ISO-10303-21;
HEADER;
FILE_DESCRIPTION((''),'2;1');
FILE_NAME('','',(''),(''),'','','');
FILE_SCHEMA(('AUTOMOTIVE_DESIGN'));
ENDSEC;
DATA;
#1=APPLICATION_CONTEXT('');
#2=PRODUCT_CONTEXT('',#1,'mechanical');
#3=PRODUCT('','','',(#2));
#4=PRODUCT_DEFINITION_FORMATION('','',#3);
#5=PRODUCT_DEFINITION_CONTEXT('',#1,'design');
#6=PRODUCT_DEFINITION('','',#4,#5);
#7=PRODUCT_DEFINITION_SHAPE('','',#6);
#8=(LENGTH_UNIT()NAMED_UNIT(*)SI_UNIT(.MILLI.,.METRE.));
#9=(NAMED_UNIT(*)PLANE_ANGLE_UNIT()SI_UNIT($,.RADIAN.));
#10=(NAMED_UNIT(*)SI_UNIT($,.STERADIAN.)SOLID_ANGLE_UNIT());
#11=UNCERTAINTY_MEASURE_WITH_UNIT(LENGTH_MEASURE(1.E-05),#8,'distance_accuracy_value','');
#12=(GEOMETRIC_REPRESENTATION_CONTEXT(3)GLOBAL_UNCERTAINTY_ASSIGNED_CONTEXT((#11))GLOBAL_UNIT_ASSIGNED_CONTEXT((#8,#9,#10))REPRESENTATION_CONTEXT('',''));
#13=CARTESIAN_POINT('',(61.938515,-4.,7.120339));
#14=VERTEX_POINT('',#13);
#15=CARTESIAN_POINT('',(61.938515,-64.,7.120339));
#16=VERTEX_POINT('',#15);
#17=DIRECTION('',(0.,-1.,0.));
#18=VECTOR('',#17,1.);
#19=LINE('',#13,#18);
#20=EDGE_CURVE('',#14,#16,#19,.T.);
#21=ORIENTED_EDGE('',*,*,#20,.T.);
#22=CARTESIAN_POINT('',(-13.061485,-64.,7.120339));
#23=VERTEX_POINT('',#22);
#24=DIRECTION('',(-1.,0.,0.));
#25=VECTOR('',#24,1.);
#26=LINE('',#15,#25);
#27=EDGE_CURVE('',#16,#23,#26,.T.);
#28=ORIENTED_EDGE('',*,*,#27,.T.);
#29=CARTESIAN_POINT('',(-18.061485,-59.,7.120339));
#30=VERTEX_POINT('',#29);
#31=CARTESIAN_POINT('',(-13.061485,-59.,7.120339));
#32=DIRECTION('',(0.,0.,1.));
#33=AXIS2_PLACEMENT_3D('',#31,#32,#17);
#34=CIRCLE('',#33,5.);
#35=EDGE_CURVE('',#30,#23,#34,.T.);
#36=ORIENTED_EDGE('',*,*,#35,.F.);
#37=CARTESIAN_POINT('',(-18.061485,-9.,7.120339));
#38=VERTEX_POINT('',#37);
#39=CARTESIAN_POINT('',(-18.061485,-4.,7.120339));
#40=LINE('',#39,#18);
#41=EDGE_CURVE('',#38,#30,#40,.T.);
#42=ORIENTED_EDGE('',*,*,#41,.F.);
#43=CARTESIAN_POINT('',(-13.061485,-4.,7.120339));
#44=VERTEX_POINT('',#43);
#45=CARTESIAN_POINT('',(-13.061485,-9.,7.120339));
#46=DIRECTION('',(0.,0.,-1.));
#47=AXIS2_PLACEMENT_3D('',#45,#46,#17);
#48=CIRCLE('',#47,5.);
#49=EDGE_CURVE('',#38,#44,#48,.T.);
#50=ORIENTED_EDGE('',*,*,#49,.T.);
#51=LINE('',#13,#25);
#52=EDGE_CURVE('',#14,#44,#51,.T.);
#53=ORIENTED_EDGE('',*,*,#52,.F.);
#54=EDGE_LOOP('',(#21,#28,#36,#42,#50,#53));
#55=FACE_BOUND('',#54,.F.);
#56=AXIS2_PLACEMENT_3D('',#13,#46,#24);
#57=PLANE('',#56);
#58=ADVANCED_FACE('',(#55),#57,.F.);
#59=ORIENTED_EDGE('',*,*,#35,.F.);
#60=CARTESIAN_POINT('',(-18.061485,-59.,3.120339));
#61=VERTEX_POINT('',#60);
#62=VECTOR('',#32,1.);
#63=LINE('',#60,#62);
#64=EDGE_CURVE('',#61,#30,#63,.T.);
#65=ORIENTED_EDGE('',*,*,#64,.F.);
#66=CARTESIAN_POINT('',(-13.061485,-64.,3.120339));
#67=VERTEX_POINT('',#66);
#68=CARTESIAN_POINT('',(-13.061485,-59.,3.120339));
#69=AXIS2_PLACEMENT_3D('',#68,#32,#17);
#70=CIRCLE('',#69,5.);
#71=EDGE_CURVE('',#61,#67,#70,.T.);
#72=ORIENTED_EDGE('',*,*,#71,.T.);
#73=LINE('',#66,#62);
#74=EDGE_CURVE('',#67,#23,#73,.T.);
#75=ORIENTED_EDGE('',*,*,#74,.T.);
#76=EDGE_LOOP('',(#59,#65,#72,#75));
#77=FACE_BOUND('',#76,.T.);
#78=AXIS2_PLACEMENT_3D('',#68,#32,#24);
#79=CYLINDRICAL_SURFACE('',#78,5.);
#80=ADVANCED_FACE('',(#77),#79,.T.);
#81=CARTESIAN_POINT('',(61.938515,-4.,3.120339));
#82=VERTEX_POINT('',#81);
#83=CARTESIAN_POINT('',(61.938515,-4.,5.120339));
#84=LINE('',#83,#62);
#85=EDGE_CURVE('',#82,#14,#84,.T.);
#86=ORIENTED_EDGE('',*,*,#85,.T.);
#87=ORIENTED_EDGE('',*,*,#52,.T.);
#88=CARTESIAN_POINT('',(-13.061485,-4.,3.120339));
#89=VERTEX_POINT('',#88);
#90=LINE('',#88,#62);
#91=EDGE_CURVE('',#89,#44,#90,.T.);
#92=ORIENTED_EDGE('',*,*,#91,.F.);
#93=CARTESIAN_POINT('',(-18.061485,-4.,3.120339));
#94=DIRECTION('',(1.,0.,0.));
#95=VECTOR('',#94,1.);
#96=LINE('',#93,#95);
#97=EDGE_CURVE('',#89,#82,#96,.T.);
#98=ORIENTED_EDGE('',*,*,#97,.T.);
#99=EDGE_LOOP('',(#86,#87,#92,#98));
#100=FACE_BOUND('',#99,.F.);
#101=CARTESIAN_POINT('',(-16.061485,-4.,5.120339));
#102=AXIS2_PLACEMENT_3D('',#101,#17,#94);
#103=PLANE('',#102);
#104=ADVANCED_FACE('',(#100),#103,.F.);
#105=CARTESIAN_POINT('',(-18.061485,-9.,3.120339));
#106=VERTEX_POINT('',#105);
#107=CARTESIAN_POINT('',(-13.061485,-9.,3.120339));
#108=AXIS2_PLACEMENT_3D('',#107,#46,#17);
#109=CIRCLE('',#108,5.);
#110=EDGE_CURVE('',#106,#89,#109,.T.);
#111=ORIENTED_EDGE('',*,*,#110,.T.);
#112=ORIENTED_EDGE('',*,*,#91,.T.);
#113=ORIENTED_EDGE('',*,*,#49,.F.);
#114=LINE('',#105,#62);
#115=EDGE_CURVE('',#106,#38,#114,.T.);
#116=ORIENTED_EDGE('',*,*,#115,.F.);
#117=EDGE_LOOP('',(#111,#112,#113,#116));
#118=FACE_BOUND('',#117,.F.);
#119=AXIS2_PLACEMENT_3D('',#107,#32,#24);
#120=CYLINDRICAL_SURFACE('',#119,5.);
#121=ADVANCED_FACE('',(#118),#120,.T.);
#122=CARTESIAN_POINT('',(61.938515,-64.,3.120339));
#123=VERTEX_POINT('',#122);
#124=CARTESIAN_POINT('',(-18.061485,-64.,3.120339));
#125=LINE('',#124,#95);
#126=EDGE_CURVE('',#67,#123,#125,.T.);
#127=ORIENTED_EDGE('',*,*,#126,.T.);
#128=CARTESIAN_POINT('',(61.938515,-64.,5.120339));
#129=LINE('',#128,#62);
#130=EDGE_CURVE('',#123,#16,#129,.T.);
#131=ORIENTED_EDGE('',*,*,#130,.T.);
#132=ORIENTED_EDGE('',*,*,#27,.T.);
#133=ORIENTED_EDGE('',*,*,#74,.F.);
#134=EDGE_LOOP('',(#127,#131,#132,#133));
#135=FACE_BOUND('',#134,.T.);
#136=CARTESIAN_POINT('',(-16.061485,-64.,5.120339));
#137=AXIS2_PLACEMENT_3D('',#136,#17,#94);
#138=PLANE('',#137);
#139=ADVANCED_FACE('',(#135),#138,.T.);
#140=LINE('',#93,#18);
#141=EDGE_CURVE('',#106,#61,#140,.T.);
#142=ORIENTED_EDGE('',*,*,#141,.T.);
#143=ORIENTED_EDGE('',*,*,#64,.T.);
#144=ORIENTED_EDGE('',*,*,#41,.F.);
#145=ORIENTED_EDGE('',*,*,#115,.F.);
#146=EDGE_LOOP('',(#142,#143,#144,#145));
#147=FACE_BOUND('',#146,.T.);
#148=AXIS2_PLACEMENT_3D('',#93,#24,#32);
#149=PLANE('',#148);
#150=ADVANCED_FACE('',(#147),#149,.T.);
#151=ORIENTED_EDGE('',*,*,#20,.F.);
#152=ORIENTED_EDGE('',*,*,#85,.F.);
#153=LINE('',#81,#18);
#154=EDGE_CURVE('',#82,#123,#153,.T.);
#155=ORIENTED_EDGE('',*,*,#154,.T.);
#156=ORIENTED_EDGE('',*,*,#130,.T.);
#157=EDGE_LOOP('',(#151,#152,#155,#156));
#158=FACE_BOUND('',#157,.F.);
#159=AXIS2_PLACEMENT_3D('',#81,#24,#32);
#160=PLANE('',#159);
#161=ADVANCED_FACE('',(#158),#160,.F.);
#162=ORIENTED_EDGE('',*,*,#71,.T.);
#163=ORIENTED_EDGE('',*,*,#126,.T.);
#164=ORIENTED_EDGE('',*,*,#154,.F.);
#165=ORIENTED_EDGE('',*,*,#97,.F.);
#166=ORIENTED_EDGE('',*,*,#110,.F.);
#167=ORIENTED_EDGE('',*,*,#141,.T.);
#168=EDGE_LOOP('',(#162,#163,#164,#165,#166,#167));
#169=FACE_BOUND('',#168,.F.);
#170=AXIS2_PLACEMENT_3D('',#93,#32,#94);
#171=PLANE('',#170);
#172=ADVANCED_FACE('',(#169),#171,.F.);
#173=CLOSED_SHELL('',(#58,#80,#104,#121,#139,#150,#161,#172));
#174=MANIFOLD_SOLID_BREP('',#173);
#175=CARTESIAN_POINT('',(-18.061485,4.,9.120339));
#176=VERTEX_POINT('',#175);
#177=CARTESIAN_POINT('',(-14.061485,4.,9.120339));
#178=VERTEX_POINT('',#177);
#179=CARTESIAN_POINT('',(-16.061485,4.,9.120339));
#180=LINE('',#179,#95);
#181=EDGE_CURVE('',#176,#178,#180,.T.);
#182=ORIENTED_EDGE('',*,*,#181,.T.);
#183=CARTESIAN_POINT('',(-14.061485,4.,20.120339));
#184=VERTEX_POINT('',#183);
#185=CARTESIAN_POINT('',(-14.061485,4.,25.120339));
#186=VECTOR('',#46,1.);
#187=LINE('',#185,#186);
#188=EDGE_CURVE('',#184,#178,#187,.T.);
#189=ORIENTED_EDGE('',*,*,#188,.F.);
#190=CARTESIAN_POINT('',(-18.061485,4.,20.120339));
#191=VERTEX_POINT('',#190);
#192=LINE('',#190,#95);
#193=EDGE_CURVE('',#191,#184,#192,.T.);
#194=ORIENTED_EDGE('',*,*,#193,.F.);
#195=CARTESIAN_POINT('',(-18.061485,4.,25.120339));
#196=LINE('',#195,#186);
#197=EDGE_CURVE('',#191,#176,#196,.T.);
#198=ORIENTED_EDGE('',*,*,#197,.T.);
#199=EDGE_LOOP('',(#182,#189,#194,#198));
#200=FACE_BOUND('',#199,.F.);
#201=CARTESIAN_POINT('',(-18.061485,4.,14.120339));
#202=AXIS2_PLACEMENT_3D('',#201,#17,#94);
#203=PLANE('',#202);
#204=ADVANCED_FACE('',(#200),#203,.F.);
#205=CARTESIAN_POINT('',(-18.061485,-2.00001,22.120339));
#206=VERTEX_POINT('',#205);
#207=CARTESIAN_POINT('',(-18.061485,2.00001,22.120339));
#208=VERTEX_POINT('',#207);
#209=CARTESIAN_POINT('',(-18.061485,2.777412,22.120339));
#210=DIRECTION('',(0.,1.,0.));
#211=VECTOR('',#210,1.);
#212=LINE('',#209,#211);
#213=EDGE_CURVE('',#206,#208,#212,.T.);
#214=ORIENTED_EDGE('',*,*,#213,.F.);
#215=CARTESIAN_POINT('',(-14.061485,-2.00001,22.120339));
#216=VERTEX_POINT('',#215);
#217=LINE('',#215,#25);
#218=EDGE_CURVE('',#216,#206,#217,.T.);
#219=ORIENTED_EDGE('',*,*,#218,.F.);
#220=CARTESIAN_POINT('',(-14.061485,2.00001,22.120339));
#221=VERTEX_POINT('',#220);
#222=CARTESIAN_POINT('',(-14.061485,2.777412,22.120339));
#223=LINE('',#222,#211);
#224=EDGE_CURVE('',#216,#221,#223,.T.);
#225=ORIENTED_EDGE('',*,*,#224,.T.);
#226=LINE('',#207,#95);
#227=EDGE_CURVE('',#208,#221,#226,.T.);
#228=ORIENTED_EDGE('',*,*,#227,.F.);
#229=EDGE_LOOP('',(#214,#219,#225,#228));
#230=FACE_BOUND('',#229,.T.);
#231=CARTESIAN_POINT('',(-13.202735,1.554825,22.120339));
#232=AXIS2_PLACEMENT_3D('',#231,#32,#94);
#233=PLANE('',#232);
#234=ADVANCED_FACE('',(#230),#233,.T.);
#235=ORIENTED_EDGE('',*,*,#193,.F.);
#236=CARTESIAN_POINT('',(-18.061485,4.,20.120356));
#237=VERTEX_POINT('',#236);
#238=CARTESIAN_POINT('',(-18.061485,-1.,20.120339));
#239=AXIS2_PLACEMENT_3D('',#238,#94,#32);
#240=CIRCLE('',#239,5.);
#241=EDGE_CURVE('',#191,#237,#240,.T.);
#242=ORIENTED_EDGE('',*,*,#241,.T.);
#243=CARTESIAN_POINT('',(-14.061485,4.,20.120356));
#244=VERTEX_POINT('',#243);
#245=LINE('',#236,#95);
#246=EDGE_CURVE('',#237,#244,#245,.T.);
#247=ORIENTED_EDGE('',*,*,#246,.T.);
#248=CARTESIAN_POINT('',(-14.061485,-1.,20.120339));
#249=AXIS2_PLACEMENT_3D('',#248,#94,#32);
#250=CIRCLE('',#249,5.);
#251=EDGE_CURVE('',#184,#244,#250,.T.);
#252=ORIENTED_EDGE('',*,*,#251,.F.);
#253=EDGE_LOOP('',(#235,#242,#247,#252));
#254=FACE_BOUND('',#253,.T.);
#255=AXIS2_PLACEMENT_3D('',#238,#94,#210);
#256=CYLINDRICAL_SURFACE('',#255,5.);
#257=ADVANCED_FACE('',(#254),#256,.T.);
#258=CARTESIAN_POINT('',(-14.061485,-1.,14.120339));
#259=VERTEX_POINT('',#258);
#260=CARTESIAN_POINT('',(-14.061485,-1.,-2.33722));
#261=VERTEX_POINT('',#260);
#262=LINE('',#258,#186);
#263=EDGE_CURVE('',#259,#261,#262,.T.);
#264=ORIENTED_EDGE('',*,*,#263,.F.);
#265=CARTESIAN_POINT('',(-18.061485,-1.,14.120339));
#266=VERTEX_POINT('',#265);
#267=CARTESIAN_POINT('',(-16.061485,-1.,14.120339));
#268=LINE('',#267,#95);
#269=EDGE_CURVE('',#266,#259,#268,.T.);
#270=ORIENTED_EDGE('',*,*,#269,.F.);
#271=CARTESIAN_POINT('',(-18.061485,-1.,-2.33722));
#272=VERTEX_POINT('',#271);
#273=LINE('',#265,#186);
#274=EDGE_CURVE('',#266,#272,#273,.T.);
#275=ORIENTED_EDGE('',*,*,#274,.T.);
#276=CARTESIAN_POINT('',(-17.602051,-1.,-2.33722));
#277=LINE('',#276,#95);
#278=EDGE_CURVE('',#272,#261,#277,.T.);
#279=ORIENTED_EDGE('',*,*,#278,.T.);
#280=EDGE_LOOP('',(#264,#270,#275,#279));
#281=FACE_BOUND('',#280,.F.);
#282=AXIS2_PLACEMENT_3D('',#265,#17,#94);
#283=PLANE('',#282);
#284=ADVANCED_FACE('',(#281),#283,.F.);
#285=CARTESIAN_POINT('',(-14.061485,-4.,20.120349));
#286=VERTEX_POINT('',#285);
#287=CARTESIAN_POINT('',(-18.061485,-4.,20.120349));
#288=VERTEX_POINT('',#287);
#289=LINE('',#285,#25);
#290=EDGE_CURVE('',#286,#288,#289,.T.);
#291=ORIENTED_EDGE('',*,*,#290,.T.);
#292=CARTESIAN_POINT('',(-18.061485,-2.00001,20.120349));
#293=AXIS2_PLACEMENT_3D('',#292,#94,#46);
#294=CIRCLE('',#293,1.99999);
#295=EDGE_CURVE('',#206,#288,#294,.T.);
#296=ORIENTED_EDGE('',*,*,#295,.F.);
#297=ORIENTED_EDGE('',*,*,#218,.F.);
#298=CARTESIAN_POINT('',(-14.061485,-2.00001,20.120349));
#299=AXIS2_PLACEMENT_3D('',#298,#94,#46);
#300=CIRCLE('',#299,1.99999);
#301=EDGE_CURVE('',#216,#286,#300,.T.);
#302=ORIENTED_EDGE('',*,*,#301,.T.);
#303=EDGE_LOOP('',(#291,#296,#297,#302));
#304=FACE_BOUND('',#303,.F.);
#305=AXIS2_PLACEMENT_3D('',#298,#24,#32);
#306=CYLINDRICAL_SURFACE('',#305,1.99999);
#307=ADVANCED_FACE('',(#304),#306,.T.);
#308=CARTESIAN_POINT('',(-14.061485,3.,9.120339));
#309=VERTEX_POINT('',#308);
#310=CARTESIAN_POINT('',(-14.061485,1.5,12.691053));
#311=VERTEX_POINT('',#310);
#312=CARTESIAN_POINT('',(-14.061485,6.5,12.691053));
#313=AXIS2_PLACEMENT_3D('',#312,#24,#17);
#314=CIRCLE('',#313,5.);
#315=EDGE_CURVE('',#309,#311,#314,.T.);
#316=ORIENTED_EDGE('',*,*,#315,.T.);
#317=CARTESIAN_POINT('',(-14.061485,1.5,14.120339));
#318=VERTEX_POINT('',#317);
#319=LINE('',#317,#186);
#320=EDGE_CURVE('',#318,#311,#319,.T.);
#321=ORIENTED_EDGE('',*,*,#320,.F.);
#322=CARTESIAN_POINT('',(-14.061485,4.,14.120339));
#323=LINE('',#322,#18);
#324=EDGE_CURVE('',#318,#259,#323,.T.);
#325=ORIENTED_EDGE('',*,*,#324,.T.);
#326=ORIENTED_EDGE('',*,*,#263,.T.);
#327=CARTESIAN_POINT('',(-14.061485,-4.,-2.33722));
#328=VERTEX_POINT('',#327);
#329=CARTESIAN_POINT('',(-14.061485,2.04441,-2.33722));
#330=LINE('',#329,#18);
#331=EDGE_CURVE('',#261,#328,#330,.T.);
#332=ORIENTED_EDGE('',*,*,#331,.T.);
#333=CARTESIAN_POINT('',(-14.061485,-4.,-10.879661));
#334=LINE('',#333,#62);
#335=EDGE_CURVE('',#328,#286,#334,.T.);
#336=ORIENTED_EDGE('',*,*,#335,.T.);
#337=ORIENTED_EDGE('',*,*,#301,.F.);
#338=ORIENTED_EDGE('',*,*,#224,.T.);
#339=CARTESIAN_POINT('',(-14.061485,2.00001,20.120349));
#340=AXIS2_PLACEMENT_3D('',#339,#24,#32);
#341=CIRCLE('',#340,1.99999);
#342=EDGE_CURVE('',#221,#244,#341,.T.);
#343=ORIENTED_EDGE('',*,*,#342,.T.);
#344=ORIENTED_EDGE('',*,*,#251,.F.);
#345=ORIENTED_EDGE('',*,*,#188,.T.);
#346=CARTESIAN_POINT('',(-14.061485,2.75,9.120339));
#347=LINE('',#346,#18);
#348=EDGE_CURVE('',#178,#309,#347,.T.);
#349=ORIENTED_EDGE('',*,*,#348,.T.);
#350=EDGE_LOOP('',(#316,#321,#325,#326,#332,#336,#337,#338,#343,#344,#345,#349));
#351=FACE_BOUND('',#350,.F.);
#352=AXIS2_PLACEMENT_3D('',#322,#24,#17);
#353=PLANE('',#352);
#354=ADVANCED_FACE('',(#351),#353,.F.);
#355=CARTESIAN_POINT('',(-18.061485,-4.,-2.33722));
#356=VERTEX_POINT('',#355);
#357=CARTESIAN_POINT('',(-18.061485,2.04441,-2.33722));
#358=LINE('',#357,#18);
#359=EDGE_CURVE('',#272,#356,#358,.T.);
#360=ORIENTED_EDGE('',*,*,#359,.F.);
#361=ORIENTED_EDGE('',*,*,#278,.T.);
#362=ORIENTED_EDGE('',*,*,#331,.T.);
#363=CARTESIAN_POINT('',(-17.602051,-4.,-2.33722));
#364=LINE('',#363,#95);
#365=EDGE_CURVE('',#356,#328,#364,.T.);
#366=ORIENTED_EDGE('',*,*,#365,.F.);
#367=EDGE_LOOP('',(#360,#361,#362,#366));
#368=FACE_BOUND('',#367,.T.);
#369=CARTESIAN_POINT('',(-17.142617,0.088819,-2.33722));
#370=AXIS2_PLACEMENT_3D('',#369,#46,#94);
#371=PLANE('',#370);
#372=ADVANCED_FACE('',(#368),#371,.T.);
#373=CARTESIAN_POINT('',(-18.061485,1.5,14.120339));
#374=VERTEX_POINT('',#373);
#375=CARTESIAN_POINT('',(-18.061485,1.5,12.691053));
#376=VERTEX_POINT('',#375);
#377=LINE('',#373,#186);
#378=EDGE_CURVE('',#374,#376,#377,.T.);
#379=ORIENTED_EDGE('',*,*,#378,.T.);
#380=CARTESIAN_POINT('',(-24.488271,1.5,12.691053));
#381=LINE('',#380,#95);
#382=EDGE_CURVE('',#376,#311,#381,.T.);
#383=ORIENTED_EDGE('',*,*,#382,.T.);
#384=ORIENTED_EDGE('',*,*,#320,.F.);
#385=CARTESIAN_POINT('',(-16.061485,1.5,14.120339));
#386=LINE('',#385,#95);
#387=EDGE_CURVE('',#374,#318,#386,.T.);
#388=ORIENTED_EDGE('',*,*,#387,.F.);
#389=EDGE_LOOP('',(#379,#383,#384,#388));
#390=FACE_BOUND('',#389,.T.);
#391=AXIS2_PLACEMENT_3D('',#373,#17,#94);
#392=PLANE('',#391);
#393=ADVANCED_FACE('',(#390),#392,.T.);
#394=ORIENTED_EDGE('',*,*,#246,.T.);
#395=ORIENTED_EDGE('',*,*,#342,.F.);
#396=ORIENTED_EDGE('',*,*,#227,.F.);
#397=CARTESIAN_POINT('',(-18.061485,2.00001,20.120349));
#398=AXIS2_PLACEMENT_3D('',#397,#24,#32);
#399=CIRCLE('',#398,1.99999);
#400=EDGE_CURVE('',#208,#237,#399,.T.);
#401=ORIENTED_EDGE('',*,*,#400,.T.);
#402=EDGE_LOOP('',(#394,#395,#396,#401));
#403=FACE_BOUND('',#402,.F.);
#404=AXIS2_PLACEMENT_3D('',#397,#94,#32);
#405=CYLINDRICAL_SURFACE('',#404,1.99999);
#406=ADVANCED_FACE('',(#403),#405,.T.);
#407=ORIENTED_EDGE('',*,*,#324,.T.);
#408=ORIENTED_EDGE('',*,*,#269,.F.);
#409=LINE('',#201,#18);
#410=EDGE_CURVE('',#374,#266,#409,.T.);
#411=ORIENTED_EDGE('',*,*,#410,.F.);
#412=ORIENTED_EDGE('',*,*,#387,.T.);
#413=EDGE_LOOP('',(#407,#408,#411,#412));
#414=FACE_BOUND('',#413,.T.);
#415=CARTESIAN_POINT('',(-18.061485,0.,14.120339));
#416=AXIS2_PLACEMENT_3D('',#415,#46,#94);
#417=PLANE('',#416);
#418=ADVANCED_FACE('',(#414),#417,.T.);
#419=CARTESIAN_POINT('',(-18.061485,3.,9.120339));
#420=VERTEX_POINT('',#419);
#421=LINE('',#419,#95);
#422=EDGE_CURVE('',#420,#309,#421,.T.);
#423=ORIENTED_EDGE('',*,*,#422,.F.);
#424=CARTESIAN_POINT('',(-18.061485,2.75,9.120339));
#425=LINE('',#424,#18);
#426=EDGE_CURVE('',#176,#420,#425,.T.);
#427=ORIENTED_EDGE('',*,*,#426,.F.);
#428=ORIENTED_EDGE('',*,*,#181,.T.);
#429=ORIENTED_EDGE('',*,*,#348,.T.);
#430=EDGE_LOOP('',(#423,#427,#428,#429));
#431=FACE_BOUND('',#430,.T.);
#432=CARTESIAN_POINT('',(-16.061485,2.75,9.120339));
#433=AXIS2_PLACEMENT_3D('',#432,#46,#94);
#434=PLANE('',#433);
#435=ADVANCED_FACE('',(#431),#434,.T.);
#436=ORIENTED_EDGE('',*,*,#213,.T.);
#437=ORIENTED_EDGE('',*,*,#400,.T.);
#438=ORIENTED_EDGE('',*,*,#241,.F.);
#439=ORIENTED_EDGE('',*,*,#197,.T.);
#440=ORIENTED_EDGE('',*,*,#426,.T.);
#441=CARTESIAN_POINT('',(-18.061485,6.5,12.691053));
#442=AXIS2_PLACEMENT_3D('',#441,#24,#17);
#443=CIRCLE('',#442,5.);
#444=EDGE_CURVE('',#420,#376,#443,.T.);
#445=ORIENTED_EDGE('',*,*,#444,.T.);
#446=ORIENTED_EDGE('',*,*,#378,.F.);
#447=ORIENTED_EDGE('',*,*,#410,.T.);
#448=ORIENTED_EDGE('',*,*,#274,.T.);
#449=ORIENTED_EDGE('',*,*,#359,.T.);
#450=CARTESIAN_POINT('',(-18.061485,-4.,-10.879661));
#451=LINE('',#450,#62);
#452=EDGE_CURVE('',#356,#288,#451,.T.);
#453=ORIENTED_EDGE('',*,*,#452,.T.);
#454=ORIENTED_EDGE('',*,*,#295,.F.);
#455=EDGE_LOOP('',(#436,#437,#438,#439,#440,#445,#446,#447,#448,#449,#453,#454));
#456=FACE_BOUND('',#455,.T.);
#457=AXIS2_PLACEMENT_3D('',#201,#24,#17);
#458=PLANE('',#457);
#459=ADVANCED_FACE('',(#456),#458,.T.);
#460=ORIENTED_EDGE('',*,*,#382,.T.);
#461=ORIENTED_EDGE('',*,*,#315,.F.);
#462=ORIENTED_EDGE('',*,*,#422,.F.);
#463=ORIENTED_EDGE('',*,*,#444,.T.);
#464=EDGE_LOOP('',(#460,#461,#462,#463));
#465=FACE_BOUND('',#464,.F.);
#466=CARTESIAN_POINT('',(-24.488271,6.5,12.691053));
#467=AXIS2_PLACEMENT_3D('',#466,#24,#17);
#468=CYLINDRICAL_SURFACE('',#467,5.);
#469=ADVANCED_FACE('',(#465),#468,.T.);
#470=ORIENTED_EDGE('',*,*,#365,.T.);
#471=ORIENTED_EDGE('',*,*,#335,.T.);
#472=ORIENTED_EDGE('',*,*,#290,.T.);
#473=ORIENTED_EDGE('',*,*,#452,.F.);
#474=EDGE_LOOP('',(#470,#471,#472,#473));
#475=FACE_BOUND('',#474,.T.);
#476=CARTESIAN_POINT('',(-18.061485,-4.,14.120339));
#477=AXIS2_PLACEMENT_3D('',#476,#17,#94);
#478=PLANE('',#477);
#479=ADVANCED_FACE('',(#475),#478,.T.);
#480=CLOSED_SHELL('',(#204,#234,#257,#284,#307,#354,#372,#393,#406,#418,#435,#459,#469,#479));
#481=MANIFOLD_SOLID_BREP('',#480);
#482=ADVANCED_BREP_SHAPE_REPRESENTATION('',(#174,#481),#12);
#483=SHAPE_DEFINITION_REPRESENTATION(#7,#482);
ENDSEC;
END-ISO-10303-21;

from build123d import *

# Parameters (mm, degrees)
F2_W        = 4
F2_H        = 11
F3_DEPTH    = 4
F4_W        = 4
F4_H        = 3
F5_DEPTH    = 25
F6_W        = 4
F6_H        = 2.5
F7_DEPTH    = 5
F8_SIZE2    = 1
F8_SIZE     = 1.5
F9_T1_DEPTH = 16.8535710714
F10_R       = 5
F11_W       = 4
F11_H       = 4
F11_W_2     = 76
F12_DEPTH   = 60
F14_W       = 12.6825077459
F14_H       = 13.7545838952
F15_DEPTH   = 25
F16_R       = 2
F17_R       = 5
F19_W       = 20.4623111058
F19_H       = 23.2868297026
F20_DEPTH   = 25
F21_R       = 1.99999


# Not quite as in the source:
# - a fillet or chamfer that OpenCascade refuses, or shapes differently, is made with other operations: its cross-section is extruded or revolved along the edge and cut away or added
# - a fillet or chamfer is up to 0.001 mm smaller than in the source, because OpenCascade refuses the exact size


with BuildPart() as f3:
    # F2 (on Front) → F3 (new body, symmetric)
    with BuildSketch(Plane.XZ):
        with Locations((-16.0614851415, 19.6203391254)):
            Rectangle(F2_W, F2_H)
    extrude(amount=F3_DEPTH, both=True)

    # F4 (on face) → F5 (join)
    with BuildSketch(Plane(origin=(0, 0, 14.1203391254), x_dir=(1, 0, 0), z_dir=(0, 0, -1))):
        with Locations((-16.0614851415, 2.5)):
            Rectangle(F4_W, F4_H)
    extrude(amount=F5_DEPTH)

    # F6 (on face) → F7 (join)
    with BuildSketch(Plane(origin=(0, 0, 14.1203391254), x_dir=(1, 0, 0), z_dir=(0, 0, -1))):
        with Locations((-16.0614851415, -2.75)):
            Rectangle(F6_W, F6_H)
    extrude(amount=F7_DEPTH)

    # F8
    f8_edges = [f3.edges().sort_by_distance(p)[0] for p in [
        (-16.061485, 1.5, 9.120339),
    ]]
    f8_side = f3.faces().sort_by_distance((-16.061485, 2.75, 9.120339))[0]
    chamfer(f8_edges, length=F8_SIZE, length2=F8_SIZE2, reference=f8_side)

    # F9: fillet of radius 5 on 1 edges, made by hand

    # F9_s2 → F9_t1 (cut)
    with BuildSketch(Plane.YZ.offset(-24.4882706772)):
        with BuildLine():
            ThreePointArc((1.5, 12.6910533397), (1.8902277714, 10.7545616666), (3, 9.1203391254))
            Line((3, 9.1203391254), (1.5, 10.1203391254))
            Line((1.5, 10.1203391254), (1.5, 12.6910533397))
        make_face()
    extrude(amount=F9_T1_DEPTH, mode=Mode.SUBTRACT)

    # F10
    f10_edges = [f3.edges().sort_by_distance(p)[0] for p in [
        (-16.061485, 4, 25.120339),
    ]]
    fillet(f10_edges, radius=F10_R)

    # F14 (on offset) → F15 (cut)
    with BuildSketch(Plane(origin=(0, 0, -2.3372200429), x_dir=(1, 0, 0), z_dir=(0, 0, -1))):
        with Locations((-17.142616678, -0.0888193026)):
            Rectangle(F14_W, F14_H)
    extrude(amount=F15_DEPTH, mode=Mode.SUBTRACT)

    # F16
    f16_edges = [f3.edges().sort_by_distance(p)[0] for p in [
        (-16.061485, -4, 25.120339),
    ]]
    fillet(f16_edges, radius=F16_R)

    # F19 (on offset) → F20 (cut)
    with BuildSketch(Plane.XY.offset(22.1203391254)):
        with Locations((-13.2027346408, 1.5548248775)):
            Rectangle(F19_W, F19_H)
    extrude(amount=F20_DEPTH, mode=Mode.SUBTRACT)

    # F21 (radius 2 in the source; OpenCascade refuses exactly that, so slightly less here)
    f21_edges = [f3.edges().sort_by_distance(p)[0] for p in [
        (-16.061485, -4, 22.120339),
        (-16.061485, 3.582576, 22.120339),
    ]]
    fillet(f21_edges, radius=F21_R)


with BuildPart() as f12:
    # F11 (on face) → F12 (new body)
    with BuildSketch(Plane.XZ.offset(4)):
        with Locations((-16.0614851415, 5.1203391254)):
            Rectangle(F11_W, F11_H)
        with Locations((23.9385148585, 5.1203391254)):
            Rectangle(F11_W_2, F11_H)
    extrude(amount=F12_DEPTH)

    # F17
    f17_edges = [f12.edges().sort_by_distance(p)[0] for p in [
        (-18.061485, -4, 5.120339),
        (-18.061485, -64, 5.120339),
    ]]
    fillet(f17_edges, radius=F17_R)


solid = Compound([f3.part, f12.part])
